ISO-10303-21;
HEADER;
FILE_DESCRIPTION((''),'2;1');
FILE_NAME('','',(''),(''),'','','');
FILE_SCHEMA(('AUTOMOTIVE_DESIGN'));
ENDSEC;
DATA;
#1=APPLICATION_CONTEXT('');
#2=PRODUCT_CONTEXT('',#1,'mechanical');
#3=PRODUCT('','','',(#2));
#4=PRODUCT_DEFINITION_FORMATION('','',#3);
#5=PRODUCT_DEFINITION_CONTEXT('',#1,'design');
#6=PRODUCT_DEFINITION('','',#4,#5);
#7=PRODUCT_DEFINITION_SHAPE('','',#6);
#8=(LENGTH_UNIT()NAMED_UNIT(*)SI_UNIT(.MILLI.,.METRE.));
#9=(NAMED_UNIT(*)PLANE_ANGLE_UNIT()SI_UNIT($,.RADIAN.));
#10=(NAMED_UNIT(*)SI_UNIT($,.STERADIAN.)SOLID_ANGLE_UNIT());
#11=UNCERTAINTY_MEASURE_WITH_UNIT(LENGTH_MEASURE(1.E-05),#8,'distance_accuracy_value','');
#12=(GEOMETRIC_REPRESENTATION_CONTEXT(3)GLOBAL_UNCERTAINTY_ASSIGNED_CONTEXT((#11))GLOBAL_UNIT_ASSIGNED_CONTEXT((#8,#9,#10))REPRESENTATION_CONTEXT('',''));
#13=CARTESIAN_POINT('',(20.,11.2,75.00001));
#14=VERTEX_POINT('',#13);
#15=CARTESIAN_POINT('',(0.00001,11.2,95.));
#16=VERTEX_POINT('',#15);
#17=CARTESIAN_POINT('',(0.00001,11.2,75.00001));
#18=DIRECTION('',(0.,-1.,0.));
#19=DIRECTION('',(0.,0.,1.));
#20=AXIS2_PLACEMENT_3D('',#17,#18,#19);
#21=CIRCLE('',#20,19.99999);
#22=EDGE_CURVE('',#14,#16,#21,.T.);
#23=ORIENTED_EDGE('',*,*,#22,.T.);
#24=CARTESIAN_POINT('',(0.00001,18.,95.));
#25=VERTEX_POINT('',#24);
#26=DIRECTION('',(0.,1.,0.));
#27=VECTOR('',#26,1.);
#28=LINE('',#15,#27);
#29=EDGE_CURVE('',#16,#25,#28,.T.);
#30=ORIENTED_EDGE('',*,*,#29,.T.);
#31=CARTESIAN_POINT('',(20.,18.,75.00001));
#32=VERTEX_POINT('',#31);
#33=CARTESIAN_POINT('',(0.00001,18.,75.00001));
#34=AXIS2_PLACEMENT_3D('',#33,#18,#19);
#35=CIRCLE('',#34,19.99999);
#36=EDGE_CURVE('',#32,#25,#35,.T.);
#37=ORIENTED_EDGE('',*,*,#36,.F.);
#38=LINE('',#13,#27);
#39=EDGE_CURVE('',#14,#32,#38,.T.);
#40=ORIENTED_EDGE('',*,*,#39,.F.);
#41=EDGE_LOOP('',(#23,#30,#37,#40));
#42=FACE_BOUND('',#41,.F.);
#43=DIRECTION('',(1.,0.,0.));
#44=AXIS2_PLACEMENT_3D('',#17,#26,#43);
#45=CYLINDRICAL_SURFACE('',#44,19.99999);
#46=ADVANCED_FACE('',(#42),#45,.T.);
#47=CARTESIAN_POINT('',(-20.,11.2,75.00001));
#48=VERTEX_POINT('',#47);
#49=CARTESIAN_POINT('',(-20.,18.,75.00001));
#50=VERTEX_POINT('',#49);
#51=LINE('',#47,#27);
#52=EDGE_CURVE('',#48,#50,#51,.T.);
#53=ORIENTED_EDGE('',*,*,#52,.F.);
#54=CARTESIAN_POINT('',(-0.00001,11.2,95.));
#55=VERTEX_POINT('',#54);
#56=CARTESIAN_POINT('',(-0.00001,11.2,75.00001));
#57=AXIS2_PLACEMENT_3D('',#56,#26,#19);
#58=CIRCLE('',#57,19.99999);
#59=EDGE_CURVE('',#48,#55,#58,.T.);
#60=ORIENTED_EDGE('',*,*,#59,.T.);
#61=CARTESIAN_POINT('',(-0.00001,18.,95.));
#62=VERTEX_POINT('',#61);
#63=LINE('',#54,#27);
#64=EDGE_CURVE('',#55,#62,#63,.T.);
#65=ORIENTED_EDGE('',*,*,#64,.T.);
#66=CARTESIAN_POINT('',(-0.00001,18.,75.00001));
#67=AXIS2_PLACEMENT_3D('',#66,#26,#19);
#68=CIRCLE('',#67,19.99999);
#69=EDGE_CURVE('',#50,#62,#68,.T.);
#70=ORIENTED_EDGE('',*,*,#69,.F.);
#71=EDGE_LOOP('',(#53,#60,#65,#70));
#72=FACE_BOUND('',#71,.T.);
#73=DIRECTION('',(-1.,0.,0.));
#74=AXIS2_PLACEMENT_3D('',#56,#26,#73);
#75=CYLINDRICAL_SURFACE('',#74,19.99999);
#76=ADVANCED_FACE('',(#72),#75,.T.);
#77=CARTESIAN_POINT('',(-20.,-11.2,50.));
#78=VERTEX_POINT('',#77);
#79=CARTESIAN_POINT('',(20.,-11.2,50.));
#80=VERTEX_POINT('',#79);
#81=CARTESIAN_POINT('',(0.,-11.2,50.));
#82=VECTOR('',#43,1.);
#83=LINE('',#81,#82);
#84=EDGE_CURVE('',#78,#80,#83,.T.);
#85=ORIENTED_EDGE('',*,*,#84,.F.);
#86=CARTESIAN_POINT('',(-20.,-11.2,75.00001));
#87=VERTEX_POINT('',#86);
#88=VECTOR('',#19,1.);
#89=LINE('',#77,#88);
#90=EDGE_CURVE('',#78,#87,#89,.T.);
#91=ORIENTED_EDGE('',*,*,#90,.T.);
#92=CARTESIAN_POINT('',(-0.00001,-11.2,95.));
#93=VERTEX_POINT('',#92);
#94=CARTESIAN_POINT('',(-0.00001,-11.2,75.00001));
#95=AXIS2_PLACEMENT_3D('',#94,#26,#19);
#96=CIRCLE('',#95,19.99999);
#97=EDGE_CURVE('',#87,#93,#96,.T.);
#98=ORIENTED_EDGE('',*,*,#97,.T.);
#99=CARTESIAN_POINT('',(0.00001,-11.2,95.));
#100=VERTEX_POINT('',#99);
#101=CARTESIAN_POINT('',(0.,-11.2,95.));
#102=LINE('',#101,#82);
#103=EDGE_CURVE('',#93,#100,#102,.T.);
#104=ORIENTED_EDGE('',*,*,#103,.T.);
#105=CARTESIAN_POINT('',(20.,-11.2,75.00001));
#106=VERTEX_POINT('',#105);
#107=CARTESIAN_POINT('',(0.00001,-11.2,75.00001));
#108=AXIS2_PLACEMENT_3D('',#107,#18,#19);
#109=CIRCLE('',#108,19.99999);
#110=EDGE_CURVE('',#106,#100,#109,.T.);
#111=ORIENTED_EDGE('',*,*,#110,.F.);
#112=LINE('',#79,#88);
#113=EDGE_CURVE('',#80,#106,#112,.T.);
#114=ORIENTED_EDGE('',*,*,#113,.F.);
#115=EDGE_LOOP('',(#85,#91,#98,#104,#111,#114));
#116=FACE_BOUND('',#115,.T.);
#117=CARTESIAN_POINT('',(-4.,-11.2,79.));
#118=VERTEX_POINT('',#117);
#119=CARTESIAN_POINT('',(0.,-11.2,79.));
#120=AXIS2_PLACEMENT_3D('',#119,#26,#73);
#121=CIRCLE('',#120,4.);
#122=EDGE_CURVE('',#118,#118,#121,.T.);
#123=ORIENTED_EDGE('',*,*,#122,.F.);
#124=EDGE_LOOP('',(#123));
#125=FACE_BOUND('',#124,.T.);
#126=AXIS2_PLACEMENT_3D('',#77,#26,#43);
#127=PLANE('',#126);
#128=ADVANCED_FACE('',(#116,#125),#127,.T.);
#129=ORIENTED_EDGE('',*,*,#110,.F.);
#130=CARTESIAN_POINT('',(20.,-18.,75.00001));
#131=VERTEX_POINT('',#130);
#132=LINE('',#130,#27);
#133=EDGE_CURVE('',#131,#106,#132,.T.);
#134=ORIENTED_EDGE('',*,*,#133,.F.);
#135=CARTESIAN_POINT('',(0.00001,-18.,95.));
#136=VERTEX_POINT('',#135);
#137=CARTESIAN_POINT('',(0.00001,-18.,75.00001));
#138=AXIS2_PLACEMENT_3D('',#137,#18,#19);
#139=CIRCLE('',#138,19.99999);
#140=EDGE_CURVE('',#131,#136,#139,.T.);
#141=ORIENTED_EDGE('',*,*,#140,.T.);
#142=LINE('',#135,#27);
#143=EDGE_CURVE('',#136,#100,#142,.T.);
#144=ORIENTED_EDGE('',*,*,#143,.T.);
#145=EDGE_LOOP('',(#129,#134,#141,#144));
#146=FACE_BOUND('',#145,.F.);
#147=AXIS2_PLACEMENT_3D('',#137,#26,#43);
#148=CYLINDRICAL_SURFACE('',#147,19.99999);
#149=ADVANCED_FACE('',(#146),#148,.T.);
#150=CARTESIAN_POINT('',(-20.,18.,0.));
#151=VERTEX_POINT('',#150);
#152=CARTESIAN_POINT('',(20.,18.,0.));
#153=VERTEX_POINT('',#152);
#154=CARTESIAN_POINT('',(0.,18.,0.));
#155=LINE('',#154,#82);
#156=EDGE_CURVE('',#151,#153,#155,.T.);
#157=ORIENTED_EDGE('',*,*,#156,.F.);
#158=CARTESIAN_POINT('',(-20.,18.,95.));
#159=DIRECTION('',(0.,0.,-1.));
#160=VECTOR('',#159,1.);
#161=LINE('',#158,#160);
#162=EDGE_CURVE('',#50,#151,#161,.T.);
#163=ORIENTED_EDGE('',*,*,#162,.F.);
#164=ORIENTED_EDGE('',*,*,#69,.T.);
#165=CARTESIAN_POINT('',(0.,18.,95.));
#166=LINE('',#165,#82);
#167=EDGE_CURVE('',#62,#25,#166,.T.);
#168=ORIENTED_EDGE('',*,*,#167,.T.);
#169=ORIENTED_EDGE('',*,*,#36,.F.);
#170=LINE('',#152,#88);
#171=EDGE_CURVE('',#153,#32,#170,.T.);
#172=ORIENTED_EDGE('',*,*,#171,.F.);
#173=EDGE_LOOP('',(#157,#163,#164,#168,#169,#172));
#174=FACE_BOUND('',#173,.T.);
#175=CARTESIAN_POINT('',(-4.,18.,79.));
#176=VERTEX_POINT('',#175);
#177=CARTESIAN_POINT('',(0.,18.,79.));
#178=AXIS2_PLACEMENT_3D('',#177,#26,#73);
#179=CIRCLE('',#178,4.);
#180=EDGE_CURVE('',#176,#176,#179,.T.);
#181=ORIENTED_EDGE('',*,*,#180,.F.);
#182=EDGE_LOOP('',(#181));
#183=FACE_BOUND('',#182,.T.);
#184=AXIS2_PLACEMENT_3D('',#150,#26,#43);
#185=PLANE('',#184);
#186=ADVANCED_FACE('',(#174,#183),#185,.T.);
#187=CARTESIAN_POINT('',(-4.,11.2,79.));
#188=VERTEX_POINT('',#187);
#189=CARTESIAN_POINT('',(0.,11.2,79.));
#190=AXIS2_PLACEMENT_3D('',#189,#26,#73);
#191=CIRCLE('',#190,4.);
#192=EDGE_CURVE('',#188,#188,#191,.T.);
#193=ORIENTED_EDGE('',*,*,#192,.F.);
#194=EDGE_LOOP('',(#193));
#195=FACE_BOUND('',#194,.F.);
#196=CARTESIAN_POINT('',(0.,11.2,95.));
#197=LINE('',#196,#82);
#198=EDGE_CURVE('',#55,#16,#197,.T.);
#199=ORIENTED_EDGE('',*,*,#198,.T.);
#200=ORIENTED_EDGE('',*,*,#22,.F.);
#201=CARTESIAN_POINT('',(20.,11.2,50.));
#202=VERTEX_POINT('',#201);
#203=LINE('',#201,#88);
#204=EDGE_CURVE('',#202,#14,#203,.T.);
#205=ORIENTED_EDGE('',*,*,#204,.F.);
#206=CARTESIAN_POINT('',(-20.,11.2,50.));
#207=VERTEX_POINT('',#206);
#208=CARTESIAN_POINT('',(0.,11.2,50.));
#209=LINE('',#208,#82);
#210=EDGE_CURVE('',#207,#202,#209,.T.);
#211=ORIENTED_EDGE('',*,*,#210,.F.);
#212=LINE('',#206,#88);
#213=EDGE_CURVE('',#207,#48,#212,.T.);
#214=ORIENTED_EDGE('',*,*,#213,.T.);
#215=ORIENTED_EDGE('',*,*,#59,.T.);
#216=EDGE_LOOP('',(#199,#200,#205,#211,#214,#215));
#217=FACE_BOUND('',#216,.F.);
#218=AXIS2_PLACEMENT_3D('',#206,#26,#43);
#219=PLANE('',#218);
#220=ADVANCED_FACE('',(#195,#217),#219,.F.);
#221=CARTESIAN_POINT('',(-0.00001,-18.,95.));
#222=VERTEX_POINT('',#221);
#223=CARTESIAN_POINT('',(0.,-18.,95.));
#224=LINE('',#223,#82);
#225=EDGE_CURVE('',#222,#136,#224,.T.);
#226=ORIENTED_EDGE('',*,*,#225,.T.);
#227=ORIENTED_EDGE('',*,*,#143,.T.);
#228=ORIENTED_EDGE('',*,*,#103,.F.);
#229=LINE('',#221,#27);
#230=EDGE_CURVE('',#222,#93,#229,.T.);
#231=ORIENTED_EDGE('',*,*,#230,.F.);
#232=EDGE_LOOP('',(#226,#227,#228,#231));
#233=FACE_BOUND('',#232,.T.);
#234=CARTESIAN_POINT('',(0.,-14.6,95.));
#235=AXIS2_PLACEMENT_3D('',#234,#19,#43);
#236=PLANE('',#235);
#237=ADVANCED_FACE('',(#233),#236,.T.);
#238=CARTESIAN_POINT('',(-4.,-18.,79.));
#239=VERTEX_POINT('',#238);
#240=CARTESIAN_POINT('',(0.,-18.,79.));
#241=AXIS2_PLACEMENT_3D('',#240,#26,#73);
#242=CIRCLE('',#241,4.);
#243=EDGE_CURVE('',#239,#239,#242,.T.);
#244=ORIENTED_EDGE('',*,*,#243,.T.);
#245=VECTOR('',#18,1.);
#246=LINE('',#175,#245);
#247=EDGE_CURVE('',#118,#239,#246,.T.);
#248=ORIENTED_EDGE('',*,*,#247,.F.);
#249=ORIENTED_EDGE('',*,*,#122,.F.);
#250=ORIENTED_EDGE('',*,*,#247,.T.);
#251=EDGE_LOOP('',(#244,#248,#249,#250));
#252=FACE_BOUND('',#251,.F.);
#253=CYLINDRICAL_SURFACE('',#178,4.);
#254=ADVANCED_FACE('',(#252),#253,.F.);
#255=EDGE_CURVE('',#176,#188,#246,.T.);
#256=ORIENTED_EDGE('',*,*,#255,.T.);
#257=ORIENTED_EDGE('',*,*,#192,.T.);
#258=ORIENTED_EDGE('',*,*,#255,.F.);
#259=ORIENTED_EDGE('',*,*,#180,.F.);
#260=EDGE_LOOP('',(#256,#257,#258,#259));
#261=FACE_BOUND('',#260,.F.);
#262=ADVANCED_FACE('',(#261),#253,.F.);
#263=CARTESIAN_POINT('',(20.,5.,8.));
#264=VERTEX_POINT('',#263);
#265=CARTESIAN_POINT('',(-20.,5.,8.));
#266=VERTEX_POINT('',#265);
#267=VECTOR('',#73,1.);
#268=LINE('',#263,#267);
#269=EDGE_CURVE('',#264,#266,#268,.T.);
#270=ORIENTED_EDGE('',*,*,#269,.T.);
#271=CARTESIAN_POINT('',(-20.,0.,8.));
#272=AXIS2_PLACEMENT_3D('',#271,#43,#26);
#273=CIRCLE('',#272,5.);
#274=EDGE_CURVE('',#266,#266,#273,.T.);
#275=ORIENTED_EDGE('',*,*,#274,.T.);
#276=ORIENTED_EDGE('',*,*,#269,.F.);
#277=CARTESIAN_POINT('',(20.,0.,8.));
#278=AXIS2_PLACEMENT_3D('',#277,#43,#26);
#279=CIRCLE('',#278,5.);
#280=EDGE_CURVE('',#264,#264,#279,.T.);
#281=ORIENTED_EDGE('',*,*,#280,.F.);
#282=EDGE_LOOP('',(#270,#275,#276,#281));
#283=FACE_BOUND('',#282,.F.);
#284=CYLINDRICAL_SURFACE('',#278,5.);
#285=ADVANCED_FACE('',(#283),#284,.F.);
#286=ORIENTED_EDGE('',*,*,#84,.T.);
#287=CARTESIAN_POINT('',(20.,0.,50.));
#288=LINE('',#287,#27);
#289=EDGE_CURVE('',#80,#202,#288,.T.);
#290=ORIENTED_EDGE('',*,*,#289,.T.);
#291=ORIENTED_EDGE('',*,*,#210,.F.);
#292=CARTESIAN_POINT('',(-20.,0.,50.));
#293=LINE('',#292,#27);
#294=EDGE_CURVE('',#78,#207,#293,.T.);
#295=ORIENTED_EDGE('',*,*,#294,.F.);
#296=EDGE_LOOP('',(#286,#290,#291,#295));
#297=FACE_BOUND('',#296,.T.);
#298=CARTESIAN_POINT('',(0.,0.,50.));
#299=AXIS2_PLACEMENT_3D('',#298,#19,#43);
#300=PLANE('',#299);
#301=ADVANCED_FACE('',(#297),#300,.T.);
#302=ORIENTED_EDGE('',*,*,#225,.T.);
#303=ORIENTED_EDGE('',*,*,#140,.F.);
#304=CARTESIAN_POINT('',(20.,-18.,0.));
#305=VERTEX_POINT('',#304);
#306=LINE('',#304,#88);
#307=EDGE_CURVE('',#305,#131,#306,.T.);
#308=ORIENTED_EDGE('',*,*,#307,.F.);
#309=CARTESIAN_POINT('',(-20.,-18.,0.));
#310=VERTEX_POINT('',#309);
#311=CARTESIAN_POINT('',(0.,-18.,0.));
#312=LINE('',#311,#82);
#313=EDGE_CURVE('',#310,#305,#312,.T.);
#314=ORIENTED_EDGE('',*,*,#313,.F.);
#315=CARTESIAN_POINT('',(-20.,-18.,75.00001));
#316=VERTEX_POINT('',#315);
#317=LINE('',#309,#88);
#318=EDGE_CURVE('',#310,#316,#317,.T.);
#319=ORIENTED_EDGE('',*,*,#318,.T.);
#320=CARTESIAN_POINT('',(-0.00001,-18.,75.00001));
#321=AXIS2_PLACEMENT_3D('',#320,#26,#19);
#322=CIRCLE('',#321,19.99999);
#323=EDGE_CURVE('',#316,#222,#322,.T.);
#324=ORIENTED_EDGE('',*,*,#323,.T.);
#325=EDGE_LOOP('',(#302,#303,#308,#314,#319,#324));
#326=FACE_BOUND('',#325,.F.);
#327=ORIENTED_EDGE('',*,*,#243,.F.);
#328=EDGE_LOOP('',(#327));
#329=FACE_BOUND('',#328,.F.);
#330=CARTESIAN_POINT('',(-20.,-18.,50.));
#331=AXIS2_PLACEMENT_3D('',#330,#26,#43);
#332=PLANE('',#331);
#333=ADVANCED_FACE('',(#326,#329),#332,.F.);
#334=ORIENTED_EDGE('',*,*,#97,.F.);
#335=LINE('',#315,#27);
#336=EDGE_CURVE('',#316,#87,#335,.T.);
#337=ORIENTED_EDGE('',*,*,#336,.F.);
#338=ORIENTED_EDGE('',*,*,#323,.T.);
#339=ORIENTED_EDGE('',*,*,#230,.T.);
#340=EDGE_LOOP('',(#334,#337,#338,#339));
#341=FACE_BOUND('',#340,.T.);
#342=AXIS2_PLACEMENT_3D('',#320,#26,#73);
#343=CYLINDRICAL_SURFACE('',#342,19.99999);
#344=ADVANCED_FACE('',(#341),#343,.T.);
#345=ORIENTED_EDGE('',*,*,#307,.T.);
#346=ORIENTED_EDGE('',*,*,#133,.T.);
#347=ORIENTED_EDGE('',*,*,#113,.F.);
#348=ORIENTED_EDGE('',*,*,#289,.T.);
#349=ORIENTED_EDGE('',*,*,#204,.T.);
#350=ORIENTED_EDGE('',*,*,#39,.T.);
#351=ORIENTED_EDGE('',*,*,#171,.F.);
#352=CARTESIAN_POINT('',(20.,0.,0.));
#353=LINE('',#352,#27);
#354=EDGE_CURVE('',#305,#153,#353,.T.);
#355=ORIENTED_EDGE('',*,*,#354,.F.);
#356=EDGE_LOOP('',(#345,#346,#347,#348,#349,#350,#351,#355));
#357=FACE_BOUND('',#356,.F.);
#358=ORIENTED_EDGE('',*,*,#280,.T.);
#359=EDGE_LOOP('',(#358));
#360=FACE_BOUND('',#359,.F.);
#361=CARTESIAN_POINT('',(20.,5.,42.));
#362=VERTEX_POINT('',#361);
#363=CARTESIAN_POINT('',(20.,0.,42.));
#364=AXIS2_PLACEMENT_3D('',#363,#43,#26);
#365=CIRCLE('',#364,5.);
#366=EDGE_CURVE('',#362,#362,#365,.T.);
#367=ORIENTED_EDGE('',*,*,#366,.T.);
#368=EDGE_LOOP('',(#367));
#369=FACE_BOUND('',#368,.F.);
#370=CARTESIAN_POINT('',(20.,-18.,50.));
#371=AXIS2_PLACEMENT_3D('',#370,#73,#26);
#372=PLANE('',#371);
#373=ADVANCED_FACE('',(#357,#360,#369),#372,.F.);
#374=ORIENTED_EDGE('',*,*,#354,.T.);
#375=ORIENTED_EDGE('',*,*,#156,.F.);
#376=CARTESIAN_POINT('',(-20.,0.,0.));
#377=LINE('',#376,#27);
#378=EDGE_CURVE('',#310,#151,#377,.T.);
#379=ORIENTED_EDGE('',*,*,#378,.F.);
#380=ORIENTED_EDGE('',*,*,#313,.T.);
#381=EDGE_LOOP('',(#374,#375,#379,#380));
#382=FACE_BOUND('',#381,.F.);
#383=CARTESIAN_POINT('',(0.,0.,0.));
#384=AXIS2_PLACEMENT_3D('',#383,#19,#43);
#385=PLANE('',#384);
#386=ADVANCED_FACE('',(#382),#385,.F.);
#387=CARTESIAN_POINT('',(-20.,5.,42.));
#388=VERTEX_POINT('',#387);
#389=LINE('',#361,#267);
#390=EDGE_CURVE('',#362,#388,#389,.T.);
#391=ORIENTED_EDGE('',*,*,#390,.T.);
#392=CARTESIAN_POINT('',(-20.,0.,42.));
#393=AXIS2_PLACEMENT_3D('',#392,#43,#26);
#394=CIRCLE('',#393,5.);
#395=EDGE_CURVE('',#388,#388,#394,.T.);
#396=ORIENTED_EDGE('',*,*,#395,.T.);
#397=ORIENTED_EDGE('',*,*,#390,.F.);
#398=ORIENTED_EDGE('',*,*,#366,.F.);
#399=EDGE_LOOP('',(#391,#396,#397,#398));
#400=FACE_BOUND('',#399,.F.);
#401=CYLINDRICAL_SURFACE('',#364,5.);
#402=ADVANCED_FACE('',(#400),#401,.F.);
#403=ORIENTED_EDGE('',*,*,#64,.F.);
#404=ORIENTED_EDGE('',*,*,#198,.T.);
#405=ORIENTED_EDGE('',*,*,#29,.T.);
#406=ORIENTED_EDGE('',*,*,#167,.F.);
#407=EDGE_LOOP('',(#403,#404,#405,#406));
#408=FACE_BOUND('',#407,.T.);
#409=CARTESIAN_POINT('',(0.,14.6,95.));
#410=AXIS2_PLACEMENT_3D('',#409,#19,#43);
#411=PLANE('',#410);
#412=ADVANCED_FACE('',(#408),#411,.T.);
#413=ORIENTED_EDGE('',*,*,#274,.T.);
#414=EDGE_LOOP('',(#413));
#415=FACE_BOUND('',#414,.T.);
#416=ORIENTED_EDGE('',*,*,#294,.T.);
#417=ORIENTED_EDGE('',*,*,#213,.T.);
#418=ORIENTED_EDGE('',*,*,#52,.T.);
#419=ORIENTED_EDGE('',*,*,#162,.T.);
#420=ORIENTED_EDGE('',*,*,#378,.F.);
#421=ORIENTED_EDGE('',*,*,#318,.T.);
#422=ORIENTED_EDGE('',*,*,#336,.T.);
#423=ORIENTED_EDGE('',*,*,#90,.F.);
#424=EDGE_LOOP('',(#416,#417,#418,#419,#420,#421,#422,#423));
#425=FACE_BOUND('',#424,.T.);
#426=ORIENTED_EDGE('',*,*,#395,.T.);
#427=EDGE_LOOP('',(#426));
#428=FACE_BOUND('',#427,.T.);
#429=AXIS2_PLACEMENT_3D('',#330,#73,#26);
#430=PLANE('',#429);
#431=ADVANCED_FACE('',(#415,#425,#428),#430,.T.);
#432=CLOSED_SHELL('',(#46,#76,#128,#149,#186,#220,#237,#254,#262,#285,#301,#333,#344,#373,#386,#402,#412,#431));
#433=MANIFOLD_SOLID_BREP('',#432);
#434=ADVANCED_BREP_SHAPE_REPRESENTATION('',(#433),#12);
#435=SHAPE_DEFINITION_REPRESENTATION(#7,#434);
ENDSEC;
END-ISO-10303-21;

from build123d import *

# Parameters (mm, degrees)
F0_W     = 40
F0_H     = 36
F1_DEPTH = 50
F2_R     = 5
F3_DEPTH = 45
F4_W     = 40
F4_H     = 6.8
F5_DEPTH = 45
F6_R     = 19.99999
F7_R     = 4
F8_DEPTH = 50


# Not quite as in the source:
# - a fillet or chamfer is up to 0.001 mm smaller than in the source, because OpenCascade refuses the exact size


with BuildPart() as f1:
    # F0 (on Top) → F1 (new body)
    with BuildSketch(Plane.XY):
        Rectangle(F0_W, F0_H)
    extrude(amount=F1_DEPTH)

    # F2 (on face) → F3 (cut)
    with BuildSketch(Plane.YZ.offset(20)):
        with Locations((0, 42)):
            Circle(F2_R)
        with Locations((0, 8)):
            Circle(F2_R)
    extrude(amount=-F3_DEPTH, mode=Mode.SUBTRACT)

    # F4 (on face) → F5 (join)
    with BuildSketch(Plane.XY.offset(50)):
        with Locations((0, -14.6)):
            Rectangle(F4_W, F4_H)
        with Locations((0, 14.6)):
            Rectangle(F4_W, F4_H)
    extrude(amount=F5_DEPTH)

    # F6 (radius 20 in the source; OpenCascade refuses exactly that, so slightly less here)
    f6_edges = [f1.edges().sort_by_distance(p)[0] for p in [
        (20, 14.6, 95),
        (20, -14.6, 95),
        (-20, 14.6, 95),
        (-20, -14.6, 95),
    ]]
    fillet(f6_edges, radius=F6_R)

    # F7 (on face) → F8 (cut)
    with BuildSketch(Plane(origin=(0, 18, 0), x_dir=(-1, 0, 0), z_dir=(0, 1, 0))):
        with Locations((0, 79)):
            Circle(F7_R)
    extrude(amount=-F8_DEPTH, mode=Mode.SUBTRACT)


solid = f1.part
